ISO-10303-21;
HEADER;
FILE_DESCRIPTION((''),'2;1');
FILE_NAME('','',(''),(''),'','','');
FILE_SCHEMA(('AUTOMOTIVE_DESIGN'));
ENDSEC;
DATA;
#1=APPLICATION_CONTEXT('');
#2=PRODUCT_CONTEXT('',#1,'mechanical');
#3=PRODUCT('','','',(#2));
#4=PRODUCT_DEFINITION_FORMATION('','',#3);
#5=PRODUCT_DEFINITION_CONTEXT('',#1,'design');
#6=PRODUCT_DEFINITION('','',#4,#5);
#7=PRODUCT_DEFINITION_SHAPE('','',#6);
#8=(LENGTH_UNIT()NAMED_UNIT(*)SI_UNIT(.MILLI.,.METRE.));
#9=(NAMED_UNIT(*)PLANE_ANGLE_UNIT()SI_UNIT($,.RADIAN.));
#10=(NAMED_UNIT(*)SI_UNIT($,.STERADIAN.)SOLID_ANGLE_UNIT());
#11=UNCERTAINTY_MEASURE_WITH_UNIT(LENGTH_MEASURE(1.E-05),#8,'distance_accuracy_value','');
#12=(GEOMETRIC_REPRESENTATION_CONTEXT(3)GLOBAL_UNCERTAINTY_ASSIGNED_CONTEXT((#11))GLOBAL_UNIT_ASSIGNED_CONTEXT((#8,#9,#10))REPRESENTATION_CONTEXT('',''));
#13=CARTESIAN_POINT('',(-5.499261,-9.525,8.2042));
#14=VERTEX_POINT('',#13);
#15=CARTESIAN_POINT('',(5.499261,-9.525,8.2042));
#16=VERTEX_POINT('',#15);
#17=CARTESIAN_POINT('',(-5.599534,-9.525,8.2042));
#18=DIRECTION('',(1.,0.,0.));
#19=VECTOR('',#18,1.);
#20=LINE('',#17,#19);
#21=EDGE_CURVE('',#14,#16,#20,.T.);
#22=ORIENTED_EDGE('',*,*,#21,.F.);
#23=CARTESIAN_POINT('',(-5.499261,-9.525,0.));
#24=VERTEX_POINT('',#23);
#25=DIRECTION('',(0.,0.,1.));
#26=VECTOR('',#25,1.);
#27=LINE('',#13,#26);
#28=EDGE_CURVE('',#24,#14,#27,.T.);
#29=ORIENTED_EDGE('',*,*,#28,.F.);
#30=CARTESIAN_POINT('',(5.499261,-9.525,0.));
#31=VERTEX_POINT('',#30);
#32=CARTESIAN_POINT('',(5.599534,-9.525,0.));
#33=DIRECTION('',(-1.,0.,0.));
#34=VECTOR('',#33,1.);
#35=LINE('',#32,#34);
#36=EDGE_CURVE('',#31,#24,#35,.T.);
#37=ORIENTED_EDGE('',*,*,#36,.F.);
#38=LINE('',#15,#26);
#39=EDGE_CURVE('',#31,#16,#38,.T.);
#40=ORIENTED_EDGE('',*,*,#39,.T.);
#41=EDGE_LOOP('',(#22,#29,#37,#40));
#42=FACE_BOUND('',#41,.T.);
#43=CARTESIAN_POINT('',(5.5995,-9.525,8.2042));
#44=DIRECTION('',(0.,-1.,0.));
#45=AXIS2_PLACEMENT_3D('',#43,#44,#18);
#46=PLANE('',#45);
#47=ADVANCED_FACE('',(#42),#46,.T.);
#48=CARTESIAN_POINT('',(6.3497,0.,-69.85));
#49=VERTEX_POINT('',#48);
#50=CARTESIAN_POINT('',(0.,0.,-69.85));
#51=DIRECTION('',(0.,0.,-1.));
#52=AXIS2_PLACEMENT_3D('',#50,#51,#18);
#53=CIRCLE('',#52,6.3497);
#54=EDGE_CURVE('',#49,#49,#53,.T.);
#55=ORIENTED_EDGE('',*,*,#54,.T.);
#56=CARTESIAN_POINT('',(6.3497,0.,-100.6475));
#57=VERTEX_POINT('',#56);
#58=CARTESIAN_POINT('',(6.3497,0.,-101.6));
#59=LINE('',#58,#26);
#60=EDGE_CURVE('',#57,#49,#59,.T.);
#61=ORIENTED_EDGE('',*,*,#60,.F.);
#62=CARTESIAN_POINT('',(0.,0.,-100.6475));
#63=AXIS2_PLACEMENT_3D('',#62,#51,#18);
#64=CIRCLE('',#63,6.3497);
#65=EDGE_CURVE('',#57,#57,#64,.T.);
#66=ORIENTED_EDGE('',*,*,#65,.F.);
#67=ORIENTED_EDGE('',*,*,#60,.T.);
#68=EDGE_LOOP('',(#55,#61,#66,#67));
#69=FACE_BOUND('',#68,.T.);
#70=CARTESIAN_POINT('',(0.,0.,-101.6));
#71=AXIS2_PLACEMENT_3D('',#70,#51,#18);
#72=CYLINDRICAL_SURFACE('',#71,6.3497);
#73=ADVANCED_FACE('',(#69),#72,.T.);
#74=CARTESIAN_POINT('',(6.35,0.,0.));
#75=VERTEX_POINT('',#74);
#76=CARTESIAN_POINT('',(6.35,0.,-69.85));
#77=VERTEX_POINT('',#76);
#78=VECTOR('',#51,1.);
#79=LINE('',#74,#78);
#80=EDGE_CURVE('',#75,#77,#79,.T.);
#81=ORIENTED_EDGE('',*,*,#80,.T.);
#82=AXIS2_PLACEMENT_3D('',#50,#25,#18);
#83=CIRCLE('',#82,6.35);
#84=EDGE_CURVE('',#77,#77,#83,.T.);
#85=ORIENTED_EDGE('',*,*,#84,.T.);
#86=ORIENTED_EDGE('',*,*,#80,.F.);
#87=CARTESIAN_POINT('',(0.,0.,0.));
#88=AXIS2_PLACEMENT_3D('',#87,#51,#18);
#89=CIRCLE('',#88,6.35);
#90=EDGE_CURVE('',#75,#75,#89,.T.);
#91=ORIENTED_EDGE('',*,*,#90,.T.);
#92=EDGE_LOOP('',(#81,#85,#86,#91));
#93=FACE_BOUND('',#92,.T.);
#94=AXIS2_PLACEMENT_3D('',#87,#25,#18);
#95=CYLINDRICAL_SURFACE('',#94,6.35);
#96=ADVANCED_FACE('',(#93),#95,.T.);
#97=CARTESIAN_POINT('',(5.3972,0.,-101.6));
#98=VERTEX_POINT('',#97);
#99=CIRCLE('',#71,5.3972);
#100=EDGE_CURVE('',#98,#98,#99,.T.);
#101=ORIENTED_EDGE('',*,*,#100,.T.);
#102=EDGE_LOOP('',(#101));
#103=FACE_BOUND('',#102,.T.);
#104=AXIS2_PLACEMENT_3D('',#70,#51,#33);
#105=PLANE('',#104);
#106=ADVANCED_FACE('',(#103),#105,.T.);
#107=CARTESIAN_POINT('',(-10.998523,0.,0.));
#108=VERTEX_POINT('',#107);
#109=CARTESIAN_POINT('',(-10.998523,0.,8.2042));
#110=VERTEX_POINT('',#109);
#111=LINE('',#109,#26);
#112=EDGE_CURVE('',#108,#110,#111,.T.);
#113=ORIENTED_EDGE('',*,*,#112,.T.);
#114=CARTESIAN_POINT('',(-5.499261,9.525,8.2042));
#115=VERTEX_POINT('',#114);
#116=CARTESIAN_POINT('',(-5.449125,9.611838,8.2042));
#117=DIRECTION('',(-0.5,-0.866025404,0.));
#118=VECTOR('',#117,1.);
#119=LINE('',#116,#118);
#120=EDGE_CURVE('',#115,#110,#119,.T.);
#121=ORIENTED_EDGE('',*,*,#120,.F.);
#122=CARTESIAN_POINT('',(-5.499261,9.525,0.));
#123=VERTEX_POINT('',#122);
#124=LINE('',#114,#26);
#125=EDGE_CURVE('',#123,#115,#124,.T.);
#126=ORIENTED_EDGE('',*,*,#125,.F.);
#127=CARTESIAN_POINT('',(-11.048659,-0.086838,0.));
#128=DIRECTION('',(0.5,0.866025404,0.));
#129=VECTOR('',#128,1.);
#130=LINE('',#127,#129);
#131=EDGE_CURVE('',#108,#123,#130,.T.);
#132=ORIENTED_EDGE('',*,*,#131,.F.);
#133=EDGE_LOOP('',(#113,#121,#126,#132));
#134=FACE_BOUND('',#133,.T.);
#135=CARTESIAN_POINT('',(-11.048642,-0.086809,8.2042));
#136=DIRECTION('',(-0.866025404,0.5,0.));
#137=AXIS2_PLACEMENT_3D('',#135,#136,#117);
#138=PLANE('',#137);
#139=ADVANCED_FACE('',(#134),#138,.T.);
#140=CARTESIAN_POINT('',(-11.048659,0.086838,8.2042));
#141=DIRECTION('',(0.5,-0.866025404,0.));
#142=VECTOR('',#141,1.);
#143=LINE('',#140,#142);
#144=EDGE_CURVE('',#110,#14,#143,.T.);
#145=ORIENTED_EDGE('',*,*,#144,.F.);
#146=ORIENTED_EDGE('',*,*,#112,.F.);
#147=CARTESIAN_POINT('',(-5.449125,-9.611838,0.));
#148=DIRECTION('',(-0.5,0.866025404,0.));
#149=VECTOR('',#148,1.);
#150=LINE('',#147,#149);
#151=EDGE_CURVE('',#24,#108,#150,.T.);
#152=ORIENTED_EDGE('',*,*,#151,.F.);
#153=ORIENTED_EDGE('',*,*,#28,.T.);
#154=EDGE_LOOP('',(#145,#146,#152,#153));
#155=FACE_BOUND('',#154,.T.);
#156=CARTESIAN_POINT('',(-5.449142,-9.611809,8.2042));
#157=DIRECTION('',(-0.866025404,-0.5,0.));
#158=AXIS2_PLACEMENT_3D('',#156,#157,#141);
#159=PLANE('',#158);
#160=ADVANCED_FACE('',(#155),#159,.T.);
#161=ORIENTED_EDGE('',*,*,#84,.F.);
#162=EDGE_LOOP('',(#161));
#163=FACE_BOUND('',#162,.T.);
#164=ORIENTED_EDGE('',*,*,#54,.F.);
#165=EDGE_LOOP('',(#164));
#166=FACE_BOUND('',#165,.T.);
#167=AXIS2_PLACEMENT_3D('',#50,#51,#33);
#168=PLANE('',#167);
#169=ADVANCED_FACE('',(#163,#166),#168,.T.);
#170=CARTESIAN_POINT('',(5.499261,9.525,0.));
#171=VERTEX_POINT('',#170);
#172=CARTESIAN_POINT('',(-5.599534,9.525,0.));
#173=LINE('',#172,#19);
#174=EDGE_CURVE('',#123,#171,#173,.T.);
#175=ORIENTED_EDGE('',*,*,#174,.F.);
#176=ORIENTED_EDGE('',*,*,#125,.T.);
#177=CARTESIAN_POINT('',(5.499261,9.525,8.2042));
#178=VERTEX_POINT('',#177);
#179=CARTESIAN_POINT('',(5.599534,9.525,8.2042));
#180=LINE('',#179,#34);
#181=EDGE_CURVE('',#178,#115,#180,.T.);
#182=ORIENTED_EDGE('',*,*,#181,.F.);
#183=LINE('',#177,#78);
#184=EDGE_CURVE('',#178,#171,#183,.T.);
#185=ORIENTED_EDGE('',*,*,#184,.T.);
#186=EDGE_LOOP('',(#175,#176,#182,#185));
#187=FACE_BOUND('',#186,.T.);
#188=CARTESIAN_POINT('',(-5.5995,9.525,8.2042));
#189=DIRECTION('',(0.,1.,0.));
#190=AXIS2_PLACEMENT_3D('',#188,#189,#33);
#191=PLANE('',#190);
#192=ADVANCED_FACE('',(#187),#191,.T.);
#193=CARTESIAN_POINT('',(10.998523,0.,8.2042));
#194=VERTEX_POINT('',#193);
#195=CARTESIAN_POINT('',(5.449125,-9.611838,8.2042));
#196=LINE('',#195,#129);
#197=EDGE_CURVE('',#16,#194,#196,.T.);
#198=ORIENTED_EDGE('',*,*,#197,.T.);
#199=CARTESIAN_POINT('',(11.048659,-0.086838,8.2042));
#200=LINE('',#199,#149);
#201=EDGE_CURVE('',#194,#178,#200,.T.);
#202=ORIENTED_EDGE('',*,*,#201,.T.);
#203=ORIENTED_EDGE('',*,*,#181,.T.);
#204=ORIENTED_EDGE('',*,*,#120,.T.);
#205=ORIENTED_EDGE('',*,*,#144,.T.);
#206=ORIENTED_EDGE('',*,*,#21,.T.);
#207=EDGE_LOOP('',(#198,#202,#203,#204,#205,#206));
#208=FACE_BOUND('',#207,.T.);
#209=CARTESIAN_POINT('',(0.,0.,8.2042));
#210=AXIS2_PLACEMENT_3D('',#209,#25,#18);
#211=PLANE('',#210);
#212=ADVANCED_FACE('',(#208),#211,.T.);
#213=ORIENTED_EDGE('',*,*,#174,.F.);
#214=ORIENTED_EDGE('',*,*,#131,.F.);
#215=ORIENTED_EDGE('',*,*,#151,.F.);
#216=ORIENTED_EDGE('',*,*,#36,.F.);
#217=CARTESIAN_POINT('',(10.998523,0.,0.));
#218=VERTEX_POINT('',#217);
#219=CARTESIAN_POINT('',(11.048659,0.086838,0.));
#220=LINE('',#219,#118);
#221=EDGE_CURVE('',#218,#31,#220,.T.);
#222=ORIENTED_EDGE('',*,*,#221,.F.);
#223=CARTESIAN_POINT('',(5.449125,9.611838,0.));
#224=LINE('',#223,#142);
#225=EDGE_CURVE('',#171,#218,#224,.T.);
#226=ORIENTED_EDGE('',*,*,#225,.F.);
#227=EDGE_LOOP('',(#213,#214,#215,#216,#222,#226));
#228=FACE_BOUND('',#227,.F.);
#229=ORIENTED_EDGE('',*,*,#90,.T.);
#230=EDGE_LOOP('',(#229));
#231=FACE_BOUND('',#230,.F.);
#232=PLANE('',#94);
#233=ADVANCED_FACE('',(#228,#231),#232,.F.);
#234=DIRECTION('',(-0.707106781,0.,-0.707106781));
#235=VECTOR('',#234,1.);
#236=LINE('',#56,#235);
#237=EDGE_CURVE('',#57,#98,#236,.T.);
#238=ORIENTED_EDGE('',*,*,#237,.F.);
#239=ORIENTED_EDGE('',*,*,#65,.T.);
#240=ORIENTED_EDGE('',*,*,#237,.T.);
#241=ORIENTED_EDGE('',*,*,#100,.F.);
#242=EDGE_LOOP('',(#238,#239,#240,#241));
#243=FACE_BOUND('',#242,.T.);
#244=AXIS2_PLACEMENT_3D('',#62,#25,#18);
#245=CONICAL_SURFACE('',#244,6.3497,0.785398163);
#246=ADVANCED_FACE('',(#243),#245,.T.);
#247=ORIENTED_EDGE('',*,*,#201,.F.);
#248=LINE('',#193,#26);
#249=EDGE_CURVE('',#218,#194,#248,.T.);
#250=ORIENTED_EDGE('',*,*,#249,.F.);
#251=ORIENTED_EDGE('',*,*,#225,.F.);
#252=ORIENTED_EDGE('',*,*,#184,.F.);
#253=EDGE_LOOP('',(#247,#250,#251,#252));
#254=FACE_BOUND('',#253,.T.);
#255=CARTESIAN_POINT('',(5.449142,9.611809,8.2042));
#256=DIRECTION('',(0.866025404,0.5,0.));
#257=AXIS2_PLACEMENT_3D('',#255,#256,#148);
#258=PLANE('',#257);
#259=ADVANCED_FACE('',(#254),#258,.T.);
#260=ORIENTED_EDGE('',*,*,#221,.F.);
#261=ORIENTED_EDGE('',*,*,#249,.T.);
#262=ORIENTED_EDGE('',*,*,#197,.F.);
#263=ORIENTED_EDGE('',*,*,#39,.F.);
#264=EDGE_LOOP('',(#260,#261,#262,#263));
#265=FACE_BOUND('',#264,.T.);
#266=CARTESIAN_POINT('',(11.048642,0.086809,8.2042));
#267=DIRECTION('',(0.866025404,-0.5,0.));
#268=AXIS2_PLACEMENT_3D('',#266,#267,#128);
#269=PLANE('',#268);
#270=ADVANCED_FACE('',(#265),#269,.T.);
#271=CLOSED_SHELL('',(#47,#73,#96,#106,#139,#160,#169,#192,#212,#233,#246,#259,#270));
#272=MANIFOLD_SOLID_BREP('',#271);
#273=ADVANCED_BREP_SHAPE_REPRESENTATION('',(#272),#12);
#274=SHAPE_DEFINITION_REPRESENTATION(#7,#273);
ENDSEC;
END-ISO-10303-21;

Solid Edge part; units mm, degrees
sketch "Sketch1" plane through (0, 0, 0) normal (0, 0, 1) x (1, 0, 0)
  circle A0 centre (0, 0) radius 11.049
  dimension "D1" = 22.098
extrude "Protrusion1" add sketch "Sketch1" along normal blind 8.2042
sketch "Sketch2" plane through (0, 0, 0) normal (0, 0, -1) x (1, 0, 0)
  circle A0 centre (0, 0) radius 6.35
extrude "Protrusion2" add sketch "Sketch2" along normal blind 101.6
sketch "Sketch3" plane through (0, 0, -101.6) normal (0, 0, -1) x (1, 0, 0)
  circle A0 centre (0, 0) radius 6.3497
extrude "Cutout1" cut sketch "Sketch3" against normal blind 31.75 flip side to cut
chamfer "Chamfer_1" distance 0.9525 angle 45 1 edges at (-6.3497, 0, -101.6)
sketch "Sketch4" plane through (0, 0, 8.2042) normal (0, 0, 1) x (1, 0, 0)
  line L0 (-5.5995, 9.525) -> (5.5995, 9.525)
  dimension "D1" = 19.05
extrude "Cutout2" cut sketch "Sketch4" against normal up to next material side at (0, 9.575, 8.2042)
pattern_circular "Pattern1" count 6 over 360 about axis through (0, 0, 8.2042) along (0, 0, 1) of "Cutout2"
properties part number "147293"
